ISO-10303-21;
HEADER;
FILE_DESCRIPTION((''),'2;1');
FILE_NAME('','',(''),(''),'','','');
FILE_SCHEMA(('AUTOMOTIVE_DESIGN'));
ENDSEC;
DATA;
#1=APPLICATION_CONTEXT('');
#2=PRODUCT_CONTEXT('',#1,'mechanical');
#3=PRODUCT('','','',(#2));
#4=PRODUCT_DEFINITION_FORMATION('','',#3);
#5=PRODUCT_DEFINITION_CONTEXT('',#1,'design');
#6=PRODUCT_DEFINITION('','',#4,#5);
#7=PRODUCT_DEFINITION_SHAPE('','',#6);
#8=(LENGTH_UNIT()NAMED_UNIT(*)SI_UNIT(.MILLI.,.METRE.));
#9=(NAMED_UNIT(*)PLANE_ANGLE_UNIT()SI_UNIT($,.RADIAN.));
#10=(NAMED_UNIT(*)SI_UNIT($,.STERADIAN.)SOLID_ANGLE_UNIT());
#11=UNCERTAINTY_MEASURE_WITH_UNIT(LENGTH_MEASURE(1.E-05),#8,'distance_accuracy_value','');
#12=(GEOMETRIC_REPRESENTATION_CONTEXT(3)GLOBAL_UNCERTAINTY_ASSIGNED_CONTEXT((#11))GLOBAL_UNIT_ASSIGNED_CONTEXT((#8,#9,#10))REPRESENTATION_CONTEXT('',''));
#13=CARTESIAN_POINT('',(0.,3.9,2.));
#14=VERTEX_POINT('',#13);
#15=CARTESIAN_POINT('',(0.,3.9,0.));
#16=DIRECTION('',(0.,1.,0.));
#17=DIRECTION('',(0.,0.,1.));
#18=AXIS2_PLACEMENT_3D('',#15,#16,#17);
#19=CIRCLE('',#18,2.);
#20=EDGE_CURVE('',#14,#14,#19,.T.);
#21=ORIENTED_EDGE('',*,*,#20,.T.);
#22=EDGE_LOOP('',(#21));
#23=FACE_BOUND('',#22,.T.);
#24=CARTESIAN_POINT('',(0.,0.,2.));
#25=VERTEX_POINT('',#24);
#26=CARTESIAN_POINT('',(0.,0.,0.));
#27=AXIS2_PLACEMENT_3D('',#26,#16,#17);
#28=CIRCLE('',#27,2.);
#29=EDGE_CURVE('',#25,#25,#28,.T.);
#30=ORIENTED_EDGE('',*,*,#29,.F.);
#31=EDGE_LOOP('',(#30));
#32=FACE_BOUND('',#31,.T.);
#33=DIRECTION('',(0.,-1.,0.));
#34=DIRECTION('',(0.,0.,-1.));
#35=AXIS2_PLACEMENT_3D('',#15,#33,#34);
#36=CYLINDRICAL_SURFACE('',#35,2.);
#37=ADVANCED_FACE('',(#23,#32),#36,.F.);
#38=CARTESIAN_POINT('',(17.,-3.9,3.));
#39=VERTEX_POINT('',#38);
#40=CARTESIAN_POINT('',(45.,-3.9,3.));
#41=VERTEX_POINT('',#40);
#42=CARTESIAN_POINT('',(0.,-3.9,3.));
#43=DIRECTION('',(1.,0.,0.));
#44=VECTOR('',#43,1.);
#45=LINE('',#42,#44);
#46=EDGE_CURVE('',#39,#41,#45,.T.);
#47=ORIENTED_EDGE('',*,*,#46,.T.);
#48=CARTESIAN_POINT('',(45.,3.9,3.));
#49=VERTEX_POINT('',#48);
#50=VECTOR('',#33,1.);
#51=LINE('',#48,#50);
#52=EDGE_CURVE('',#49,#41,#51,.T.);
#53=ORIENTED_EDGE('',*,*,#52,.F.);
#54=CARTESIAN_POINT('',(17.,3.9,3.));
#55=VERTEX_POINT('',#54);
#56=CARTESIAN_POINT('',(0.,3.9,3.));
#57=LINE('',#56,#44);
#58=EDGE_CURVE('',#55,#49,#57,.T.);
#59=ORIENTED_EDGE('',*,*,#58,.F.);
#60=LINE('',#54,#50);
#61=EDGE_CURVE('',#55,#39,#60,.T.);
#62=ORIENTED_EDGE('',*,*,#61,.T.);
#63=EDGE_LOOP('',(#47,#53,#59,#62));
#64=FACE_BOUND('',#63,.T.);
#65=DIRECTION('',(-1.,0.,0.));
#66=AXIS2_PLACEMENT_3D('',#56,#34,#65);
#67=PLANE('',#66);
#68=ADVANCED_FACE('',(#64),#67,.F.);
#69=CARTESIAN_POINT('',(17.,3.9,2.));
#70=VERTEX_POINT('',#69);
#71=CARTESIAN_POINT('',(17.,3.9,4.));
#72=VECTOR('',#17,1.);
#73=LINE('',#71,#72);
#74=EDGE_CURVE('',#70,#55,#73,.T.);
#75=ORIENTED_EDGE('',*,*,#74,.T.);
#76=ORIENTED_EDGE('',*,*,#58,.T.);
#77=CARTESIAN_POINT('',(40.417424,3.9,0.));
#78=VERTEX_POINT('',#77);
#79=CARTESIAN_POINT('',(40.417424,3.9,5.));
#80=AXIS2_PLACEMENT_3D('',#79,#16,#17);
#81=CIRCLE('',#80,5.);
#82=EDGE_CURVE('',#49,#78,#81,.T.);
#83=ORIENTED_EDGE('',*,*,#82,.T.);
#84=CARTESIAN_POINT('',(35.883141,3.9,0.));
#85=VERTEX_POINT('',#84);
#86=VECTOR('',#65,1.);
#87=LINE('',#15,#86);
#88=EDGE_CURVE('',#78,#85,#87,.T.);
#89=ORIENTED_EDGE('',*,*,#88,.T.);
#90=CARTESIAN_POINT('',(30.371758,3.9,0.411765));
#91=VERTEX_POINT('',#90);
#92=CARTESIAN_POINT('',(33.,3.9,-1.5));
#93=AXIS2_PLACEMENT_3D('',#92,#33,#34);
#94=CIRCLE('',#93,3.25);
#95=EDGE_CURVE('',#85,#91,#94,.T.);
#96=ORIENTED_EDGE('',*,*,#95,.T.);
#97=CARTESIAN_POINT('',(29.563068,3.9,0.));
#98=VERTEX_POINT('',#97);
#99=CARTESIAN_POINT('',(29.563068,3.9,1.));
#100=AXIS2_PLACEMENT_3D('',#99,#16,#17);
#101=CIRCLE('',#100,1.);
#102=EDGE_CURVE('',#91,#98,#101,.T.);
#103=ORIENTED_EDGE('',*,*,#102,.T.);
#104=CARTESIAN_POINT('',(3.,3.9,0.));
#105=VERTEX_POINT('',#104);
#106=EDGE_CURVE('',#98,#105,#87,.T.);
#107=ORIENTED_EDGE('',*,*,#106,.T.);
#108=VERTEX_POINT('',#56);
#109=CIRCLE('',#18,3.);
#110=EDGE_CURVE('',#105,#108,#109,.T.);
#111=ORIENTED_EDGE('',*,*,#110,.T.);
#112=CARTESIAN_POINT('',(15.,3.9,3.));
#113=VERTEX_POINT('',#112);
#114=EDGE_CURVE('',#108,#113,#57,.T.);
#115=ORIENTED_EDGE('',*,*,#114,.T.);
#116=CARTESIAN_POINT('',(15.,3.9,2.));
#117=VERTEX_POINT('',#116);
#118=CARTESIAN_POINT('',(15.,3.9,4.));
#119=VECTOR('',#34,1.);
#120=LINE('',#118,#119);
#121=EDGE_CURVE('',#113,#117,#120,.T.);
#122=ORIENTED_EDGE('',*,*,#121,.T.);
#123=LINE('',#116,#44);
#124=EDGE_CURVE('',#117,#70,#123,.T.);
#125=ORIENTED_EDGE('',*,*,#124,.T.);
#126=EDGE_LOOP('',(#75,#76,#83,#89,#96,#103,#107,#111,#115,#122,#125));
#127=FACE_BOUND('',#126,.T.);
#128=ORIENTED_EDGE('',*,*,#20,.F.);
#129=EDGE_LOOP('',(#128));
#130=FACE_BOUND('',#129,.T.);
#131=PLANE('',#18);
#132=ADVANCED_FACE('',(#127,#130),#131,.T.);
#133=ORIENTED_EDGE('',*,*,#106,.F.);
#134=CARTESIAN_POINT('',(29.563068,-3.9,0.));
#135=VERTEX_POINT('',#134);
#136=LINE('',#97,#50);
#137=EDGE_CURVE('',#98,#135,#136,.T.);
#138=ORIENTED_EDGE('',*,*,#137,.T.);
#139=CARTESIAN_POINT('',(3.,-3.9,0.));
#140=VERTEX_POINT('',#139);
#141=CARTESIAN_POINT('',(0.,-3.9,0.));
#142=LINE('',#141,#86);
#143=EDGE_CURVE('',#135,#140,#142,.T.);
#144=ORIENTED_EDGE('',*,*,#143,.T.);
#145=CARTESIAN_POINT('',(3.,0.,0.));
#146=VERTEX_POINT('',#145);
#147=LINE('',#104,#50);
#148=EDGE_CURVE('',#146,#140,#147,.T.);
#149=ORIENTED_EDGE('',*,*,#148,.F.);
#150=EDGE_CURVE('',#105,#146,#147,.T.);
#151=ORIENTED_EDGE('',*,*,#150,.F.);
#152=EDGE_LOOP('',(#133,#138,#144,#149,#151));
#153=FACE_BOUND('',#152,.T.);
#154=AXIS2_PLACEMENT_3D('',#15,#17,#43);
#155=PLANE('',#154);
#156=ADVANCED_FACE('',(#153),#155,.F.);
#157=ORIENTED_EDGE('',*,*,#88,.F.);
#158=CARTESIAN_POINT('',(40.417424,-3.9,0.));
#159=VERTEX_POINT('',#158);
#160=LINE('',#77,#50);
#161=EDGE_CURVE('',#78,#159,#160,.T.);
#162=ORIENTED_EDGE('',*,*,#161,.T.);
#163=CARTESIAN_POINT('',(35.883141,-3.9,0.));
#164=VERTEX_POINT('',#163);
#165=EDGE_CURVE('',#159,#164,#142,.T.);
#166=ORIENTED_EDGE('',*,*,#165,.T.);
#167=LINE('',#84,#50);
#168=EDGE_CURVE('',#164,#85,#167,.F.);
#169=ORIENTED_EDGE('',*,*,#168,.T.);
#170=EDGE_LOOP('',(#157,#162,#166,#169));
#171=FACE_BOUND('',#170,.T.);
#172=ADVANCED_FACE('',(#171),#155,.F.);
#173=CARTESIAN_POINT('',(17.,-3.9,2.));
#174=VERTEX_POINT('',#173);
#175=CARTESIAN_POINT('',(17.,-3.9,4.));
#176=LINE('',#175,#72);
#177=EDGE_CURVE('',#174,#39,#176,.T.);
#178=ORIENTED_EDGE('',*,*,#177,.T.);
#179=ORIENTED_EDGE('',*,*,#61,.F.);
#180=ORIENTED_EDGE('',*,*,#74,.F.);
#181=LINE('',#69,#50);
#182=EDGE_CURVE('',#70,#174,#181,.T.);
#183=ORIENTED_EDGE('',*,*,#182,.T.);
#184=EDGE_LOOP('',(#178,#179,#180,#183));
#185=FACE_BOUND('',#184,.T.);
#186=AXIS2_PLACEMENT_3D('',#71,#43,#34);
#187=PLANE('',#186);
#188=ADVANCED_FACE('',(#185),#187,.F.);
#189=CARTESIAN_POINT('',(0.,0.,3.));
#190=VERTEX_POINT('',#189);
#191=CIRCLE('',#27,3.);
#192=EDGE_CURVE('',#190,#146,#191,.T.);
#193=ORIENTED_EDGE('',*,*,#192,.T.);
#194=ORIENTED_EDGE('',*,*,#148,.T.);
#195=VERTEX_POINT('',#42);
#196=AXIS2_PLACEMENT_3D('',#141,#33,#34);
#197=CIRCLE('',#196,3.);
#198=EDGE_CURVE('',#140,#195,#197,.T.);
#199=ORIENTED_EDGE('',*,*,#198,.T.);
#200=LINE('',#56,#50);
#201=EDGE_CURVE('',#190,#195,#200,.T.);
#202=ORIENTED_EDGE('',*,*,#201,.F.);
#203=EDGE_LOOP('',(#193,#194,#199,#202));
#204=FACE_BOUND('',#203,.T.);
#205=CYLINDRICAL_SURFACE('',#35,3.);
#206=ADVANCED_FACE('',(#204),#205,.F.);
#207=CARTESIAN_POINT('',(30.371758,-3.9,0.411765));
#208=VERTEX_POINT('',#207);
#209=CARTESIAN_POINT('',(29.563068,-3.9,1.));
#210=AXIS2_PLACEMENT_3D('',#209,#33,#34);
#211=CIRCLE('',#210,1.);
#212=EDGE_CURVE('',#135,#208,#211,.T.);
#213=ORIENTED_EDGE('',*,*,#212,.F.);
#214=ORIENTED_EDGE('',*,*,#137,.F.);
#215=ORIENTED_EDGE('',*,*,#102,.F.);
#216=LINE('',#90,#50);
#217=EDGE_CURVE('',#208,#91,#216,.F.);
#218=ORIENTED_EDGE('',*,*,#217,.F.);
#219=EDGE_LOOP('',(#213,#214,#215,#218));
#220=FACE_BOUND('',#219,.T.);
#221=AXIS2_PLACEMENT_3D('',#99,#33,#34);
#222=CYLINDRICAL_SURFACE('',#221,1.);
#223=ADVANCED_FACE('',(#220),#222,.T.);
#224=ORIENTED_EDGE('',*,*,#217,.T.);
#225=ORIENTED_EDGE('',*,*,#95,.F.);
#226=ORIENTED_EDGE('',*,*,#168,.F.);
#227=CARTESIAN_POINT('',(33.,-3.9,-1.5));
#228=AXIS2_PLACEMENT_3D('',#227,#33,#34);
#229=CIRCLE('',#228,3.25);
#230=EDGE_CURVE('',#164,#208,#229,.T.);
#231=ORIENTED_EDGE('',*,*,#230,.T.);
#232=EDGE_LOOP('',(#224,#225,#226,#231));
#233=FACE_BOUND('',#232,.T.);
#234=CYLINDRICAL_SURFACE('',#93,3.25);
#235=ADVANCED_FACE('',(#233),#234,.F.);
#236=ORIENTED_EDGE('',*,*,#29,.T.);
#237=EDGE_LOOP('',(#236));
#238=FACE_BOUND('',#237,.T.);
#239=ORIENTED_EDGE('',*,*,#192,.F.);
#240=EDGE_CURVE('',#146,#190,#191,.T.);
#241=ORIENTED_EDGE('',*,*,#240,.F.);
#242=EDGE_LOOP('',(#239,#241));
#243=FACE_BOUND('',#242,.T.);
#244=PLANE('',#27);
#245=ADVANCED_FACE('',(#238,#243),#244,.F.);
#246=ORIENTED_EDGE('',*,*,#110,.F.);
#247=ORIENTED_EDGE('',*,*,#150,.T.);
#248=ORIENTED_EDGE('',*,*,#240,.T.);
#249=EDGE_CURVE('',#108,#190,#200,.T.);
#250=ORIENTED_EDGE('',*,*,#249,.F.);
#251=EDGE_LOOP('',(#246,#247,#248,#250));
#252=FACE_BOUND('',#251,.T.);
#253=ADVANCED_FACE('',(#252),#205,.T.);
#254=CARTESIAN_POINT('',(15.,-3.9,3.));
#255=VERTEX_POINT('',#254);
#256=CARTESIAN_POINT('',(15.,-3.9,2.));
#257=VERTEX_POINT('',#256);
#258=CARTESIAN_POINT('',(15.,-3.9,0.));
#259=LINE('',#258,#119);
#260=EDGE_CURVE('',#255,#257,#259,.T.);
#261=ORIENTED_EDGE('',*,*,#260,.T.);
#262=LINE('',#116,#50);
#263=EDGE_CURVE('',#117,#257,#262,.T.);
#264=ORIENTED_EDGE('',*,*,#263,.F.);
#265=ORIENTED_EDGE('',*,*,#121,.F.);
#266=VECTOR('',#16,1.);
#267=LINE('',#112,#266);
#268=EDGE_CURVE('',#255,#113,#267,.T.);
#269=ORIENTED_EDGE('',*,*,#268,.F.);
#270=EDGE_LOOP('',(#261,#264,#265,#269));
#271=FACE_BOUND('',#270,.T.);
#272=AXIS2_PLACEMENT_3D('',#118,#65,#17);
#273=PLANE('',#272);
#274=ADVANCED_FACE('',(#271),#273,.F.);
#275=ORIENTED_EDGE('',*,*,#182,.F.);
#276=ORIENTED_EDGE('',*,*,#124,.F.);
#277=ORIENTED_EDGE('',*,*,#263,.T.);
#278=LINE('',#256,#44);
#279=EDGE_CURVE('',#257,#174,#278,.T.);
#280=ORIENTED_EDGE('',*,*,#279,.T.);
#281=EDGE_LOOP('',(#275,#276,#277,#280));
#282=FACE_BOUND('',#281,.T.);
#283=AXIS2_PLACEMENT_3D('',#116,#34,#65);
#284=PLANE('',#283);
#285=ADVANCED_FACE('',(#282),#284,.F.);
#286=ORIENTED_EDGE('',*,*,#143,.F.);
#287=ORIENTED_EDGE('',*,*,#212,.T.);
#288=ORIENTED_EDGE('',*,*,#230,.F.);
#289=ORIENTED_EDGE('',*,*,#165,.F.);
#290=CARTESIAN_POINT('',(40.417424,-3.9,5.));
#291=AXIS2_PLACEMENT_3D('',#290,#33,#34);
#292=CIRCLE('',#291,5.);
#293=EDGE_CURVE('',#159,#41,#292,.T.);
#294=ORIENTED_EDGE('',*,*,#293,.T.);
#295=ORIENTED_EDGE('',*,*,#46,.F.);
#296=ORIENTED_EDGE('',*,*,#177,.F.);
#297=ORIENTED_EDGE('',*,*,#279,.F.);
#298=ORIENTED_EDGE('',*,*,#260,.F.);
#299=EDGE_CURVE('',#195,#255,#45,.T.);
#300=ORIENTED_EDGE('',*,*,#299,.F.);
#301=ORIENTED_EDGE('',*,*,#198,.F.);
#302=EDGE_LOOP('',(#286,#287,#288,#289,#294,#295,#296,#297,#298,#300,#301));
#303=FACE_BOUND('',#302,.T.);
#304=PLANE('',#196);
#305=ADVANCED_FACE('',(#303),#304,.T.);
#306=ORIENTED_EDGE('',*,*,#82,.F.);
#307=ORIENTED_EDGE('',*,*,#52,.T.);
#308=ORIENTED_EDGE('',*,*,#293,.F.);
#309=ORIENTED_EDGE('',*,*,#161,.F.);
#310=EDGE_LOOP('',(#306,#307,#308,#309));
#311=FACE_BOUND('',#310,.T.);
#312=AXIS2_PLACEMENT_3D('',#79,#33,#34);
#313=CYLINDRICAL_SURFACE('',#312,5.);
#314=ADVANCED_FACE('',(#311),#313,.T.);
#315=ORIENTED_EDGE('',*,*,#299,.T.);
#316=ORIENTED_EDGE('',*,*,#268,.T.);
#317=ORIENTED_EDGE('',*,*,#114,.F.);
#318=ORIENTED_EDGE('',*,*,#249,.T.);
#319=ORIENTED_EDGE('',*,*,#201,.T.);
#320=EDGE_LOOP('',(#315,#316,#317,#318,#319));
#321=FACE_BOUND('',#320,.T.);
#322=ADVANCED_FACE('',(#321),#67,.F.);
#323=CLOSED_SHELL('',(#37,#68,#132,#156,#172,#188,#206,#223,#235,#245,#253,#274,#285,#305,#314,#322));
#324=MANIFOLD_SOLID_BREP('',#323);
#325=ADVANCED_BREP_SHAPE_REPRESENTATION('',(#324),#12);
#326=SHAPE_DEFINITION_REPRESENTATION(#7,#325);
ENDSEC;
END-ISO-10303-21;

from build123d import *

# Parameters (mm, degrees)
CROQUIS1_R                   = 3
CROQUIS1_R_2                 = 2
SALIENTE_EXTRUIR1_DEPTH      = 3.9
SALIENTE_EXTRUIR2_DEPTH      = 3.9
SALIENTE_EXTRUIR2_DEPTH_BACK = 3.9
REDONDEO1_R                  = 5
CROQUIS4_W                   = 2
CROQUIS4_H                   = 2
CORTAR_EXTRUIR1_DEPTH        = 46.769422107
CROQUIS5_R                   = 3.25
CORTAR_EXTRUIR2_DEPTH        = 46.769422107
REDONDEO3_R                  = 1


with BuildPart() as part:
    # Croquis1 → Saliente-Extruir1 (new body)
    with BuildSketch(Plane(origin=(0, 0, 0), x_dir=(1, 0, 0), z_dir=(0, 1, 0))):
        with Locations(Location((0, 0, 0), (0, 0, 270))):
            Circle(CROQUIS1_R)
        with Locations(Location((0, 0, 0), (0, 0, 270))):
            Circle(CROQUIS1_R_2, mode=Mode.SUBTRACT)
    extrude(amount=SALIENTE_EXTRUIR1_DEPTH)

    # Croquis3 → Saliente-Extruir2 (add, two sides: drawn at the far end of the back side and taken through both)
    with BuildSketch(Plane.XZ.offset(-SALIENTE_EXTRUIR2_DEPTH_BACK)):
        with BuildLine():
            Line((45, 3), (0, 3))
            ThreePointArc((0, 3), (2.121320344, 2.121320344), (3, 0))
            Line((3, 0), (45, 0))
            Line((45, 0), (45, 3))
        make_face()
    extrude(amount=SALIENTE_EXTRUIR2_DEPTH + SALIENTE_EXTRUIR2_DEPTH_BACK)

    # Redondeo1
    # the kernel refuses this fillet: 5 mm, written as the material it takes off along each edge
    with BuildSketch(Plane(origin=(45, 15.356439237, 0), x_dir=(-1, 0, 0), z_dir=(0, -1, 0))) as redondeo1_piece_1:
        with BuildLine():
            CenterArc((4.582575695, -5), REDONDEO1_R, 90, 66.421821522)
            Line((0, -3), (-0.091651514, -2.96))
            ThreePointArc((-0.091651514, -2.96), (-0.1, -1.5), (-0.1, 0))
            Line((-0.1, 0), (0, 0.1))
            Line((0, 0.1), (4.582575695, 0.1))
            Line((4.582575695, 0.1), (4.582575695, 0))
        make_face()
    extrude(amount=30.712878475, mode=Mode.SUBTRACT)

    # Croquis4 → Cortar-Extruir1 (cut, through all)
    with BuildSketch(Plane.XZ.offset(3.9)):
        with Locations((16, 3)):
            Rectangle(CROQUIS4_W, CROQUIS4_H)
    extrude(amount=-CORTAR_EXTRUIR1_DEPTH, mode=Mode.SUBTRACT)

    # Croquis5 → Cortar-Extruir2 (cut, through all)
    with BuildSketch(Plane.XZ.offset(3.9)):
        with Locations((33, -1.5)):
            Circle(CROQUIS5_R)
    extrude(amount=-CORTAR_EXTRUIR2_DEPTH, mode=Mode.SUBTRACT)

    # Redondeo3
    redondeo3_edges = [part.edges().sort_by_distance(p)[0] for p in [
        (30.116859351, 0, 0),
    ]]
    fillet(redondeo3_edges, radius=REDONDEO3_R)


solid = part.part
